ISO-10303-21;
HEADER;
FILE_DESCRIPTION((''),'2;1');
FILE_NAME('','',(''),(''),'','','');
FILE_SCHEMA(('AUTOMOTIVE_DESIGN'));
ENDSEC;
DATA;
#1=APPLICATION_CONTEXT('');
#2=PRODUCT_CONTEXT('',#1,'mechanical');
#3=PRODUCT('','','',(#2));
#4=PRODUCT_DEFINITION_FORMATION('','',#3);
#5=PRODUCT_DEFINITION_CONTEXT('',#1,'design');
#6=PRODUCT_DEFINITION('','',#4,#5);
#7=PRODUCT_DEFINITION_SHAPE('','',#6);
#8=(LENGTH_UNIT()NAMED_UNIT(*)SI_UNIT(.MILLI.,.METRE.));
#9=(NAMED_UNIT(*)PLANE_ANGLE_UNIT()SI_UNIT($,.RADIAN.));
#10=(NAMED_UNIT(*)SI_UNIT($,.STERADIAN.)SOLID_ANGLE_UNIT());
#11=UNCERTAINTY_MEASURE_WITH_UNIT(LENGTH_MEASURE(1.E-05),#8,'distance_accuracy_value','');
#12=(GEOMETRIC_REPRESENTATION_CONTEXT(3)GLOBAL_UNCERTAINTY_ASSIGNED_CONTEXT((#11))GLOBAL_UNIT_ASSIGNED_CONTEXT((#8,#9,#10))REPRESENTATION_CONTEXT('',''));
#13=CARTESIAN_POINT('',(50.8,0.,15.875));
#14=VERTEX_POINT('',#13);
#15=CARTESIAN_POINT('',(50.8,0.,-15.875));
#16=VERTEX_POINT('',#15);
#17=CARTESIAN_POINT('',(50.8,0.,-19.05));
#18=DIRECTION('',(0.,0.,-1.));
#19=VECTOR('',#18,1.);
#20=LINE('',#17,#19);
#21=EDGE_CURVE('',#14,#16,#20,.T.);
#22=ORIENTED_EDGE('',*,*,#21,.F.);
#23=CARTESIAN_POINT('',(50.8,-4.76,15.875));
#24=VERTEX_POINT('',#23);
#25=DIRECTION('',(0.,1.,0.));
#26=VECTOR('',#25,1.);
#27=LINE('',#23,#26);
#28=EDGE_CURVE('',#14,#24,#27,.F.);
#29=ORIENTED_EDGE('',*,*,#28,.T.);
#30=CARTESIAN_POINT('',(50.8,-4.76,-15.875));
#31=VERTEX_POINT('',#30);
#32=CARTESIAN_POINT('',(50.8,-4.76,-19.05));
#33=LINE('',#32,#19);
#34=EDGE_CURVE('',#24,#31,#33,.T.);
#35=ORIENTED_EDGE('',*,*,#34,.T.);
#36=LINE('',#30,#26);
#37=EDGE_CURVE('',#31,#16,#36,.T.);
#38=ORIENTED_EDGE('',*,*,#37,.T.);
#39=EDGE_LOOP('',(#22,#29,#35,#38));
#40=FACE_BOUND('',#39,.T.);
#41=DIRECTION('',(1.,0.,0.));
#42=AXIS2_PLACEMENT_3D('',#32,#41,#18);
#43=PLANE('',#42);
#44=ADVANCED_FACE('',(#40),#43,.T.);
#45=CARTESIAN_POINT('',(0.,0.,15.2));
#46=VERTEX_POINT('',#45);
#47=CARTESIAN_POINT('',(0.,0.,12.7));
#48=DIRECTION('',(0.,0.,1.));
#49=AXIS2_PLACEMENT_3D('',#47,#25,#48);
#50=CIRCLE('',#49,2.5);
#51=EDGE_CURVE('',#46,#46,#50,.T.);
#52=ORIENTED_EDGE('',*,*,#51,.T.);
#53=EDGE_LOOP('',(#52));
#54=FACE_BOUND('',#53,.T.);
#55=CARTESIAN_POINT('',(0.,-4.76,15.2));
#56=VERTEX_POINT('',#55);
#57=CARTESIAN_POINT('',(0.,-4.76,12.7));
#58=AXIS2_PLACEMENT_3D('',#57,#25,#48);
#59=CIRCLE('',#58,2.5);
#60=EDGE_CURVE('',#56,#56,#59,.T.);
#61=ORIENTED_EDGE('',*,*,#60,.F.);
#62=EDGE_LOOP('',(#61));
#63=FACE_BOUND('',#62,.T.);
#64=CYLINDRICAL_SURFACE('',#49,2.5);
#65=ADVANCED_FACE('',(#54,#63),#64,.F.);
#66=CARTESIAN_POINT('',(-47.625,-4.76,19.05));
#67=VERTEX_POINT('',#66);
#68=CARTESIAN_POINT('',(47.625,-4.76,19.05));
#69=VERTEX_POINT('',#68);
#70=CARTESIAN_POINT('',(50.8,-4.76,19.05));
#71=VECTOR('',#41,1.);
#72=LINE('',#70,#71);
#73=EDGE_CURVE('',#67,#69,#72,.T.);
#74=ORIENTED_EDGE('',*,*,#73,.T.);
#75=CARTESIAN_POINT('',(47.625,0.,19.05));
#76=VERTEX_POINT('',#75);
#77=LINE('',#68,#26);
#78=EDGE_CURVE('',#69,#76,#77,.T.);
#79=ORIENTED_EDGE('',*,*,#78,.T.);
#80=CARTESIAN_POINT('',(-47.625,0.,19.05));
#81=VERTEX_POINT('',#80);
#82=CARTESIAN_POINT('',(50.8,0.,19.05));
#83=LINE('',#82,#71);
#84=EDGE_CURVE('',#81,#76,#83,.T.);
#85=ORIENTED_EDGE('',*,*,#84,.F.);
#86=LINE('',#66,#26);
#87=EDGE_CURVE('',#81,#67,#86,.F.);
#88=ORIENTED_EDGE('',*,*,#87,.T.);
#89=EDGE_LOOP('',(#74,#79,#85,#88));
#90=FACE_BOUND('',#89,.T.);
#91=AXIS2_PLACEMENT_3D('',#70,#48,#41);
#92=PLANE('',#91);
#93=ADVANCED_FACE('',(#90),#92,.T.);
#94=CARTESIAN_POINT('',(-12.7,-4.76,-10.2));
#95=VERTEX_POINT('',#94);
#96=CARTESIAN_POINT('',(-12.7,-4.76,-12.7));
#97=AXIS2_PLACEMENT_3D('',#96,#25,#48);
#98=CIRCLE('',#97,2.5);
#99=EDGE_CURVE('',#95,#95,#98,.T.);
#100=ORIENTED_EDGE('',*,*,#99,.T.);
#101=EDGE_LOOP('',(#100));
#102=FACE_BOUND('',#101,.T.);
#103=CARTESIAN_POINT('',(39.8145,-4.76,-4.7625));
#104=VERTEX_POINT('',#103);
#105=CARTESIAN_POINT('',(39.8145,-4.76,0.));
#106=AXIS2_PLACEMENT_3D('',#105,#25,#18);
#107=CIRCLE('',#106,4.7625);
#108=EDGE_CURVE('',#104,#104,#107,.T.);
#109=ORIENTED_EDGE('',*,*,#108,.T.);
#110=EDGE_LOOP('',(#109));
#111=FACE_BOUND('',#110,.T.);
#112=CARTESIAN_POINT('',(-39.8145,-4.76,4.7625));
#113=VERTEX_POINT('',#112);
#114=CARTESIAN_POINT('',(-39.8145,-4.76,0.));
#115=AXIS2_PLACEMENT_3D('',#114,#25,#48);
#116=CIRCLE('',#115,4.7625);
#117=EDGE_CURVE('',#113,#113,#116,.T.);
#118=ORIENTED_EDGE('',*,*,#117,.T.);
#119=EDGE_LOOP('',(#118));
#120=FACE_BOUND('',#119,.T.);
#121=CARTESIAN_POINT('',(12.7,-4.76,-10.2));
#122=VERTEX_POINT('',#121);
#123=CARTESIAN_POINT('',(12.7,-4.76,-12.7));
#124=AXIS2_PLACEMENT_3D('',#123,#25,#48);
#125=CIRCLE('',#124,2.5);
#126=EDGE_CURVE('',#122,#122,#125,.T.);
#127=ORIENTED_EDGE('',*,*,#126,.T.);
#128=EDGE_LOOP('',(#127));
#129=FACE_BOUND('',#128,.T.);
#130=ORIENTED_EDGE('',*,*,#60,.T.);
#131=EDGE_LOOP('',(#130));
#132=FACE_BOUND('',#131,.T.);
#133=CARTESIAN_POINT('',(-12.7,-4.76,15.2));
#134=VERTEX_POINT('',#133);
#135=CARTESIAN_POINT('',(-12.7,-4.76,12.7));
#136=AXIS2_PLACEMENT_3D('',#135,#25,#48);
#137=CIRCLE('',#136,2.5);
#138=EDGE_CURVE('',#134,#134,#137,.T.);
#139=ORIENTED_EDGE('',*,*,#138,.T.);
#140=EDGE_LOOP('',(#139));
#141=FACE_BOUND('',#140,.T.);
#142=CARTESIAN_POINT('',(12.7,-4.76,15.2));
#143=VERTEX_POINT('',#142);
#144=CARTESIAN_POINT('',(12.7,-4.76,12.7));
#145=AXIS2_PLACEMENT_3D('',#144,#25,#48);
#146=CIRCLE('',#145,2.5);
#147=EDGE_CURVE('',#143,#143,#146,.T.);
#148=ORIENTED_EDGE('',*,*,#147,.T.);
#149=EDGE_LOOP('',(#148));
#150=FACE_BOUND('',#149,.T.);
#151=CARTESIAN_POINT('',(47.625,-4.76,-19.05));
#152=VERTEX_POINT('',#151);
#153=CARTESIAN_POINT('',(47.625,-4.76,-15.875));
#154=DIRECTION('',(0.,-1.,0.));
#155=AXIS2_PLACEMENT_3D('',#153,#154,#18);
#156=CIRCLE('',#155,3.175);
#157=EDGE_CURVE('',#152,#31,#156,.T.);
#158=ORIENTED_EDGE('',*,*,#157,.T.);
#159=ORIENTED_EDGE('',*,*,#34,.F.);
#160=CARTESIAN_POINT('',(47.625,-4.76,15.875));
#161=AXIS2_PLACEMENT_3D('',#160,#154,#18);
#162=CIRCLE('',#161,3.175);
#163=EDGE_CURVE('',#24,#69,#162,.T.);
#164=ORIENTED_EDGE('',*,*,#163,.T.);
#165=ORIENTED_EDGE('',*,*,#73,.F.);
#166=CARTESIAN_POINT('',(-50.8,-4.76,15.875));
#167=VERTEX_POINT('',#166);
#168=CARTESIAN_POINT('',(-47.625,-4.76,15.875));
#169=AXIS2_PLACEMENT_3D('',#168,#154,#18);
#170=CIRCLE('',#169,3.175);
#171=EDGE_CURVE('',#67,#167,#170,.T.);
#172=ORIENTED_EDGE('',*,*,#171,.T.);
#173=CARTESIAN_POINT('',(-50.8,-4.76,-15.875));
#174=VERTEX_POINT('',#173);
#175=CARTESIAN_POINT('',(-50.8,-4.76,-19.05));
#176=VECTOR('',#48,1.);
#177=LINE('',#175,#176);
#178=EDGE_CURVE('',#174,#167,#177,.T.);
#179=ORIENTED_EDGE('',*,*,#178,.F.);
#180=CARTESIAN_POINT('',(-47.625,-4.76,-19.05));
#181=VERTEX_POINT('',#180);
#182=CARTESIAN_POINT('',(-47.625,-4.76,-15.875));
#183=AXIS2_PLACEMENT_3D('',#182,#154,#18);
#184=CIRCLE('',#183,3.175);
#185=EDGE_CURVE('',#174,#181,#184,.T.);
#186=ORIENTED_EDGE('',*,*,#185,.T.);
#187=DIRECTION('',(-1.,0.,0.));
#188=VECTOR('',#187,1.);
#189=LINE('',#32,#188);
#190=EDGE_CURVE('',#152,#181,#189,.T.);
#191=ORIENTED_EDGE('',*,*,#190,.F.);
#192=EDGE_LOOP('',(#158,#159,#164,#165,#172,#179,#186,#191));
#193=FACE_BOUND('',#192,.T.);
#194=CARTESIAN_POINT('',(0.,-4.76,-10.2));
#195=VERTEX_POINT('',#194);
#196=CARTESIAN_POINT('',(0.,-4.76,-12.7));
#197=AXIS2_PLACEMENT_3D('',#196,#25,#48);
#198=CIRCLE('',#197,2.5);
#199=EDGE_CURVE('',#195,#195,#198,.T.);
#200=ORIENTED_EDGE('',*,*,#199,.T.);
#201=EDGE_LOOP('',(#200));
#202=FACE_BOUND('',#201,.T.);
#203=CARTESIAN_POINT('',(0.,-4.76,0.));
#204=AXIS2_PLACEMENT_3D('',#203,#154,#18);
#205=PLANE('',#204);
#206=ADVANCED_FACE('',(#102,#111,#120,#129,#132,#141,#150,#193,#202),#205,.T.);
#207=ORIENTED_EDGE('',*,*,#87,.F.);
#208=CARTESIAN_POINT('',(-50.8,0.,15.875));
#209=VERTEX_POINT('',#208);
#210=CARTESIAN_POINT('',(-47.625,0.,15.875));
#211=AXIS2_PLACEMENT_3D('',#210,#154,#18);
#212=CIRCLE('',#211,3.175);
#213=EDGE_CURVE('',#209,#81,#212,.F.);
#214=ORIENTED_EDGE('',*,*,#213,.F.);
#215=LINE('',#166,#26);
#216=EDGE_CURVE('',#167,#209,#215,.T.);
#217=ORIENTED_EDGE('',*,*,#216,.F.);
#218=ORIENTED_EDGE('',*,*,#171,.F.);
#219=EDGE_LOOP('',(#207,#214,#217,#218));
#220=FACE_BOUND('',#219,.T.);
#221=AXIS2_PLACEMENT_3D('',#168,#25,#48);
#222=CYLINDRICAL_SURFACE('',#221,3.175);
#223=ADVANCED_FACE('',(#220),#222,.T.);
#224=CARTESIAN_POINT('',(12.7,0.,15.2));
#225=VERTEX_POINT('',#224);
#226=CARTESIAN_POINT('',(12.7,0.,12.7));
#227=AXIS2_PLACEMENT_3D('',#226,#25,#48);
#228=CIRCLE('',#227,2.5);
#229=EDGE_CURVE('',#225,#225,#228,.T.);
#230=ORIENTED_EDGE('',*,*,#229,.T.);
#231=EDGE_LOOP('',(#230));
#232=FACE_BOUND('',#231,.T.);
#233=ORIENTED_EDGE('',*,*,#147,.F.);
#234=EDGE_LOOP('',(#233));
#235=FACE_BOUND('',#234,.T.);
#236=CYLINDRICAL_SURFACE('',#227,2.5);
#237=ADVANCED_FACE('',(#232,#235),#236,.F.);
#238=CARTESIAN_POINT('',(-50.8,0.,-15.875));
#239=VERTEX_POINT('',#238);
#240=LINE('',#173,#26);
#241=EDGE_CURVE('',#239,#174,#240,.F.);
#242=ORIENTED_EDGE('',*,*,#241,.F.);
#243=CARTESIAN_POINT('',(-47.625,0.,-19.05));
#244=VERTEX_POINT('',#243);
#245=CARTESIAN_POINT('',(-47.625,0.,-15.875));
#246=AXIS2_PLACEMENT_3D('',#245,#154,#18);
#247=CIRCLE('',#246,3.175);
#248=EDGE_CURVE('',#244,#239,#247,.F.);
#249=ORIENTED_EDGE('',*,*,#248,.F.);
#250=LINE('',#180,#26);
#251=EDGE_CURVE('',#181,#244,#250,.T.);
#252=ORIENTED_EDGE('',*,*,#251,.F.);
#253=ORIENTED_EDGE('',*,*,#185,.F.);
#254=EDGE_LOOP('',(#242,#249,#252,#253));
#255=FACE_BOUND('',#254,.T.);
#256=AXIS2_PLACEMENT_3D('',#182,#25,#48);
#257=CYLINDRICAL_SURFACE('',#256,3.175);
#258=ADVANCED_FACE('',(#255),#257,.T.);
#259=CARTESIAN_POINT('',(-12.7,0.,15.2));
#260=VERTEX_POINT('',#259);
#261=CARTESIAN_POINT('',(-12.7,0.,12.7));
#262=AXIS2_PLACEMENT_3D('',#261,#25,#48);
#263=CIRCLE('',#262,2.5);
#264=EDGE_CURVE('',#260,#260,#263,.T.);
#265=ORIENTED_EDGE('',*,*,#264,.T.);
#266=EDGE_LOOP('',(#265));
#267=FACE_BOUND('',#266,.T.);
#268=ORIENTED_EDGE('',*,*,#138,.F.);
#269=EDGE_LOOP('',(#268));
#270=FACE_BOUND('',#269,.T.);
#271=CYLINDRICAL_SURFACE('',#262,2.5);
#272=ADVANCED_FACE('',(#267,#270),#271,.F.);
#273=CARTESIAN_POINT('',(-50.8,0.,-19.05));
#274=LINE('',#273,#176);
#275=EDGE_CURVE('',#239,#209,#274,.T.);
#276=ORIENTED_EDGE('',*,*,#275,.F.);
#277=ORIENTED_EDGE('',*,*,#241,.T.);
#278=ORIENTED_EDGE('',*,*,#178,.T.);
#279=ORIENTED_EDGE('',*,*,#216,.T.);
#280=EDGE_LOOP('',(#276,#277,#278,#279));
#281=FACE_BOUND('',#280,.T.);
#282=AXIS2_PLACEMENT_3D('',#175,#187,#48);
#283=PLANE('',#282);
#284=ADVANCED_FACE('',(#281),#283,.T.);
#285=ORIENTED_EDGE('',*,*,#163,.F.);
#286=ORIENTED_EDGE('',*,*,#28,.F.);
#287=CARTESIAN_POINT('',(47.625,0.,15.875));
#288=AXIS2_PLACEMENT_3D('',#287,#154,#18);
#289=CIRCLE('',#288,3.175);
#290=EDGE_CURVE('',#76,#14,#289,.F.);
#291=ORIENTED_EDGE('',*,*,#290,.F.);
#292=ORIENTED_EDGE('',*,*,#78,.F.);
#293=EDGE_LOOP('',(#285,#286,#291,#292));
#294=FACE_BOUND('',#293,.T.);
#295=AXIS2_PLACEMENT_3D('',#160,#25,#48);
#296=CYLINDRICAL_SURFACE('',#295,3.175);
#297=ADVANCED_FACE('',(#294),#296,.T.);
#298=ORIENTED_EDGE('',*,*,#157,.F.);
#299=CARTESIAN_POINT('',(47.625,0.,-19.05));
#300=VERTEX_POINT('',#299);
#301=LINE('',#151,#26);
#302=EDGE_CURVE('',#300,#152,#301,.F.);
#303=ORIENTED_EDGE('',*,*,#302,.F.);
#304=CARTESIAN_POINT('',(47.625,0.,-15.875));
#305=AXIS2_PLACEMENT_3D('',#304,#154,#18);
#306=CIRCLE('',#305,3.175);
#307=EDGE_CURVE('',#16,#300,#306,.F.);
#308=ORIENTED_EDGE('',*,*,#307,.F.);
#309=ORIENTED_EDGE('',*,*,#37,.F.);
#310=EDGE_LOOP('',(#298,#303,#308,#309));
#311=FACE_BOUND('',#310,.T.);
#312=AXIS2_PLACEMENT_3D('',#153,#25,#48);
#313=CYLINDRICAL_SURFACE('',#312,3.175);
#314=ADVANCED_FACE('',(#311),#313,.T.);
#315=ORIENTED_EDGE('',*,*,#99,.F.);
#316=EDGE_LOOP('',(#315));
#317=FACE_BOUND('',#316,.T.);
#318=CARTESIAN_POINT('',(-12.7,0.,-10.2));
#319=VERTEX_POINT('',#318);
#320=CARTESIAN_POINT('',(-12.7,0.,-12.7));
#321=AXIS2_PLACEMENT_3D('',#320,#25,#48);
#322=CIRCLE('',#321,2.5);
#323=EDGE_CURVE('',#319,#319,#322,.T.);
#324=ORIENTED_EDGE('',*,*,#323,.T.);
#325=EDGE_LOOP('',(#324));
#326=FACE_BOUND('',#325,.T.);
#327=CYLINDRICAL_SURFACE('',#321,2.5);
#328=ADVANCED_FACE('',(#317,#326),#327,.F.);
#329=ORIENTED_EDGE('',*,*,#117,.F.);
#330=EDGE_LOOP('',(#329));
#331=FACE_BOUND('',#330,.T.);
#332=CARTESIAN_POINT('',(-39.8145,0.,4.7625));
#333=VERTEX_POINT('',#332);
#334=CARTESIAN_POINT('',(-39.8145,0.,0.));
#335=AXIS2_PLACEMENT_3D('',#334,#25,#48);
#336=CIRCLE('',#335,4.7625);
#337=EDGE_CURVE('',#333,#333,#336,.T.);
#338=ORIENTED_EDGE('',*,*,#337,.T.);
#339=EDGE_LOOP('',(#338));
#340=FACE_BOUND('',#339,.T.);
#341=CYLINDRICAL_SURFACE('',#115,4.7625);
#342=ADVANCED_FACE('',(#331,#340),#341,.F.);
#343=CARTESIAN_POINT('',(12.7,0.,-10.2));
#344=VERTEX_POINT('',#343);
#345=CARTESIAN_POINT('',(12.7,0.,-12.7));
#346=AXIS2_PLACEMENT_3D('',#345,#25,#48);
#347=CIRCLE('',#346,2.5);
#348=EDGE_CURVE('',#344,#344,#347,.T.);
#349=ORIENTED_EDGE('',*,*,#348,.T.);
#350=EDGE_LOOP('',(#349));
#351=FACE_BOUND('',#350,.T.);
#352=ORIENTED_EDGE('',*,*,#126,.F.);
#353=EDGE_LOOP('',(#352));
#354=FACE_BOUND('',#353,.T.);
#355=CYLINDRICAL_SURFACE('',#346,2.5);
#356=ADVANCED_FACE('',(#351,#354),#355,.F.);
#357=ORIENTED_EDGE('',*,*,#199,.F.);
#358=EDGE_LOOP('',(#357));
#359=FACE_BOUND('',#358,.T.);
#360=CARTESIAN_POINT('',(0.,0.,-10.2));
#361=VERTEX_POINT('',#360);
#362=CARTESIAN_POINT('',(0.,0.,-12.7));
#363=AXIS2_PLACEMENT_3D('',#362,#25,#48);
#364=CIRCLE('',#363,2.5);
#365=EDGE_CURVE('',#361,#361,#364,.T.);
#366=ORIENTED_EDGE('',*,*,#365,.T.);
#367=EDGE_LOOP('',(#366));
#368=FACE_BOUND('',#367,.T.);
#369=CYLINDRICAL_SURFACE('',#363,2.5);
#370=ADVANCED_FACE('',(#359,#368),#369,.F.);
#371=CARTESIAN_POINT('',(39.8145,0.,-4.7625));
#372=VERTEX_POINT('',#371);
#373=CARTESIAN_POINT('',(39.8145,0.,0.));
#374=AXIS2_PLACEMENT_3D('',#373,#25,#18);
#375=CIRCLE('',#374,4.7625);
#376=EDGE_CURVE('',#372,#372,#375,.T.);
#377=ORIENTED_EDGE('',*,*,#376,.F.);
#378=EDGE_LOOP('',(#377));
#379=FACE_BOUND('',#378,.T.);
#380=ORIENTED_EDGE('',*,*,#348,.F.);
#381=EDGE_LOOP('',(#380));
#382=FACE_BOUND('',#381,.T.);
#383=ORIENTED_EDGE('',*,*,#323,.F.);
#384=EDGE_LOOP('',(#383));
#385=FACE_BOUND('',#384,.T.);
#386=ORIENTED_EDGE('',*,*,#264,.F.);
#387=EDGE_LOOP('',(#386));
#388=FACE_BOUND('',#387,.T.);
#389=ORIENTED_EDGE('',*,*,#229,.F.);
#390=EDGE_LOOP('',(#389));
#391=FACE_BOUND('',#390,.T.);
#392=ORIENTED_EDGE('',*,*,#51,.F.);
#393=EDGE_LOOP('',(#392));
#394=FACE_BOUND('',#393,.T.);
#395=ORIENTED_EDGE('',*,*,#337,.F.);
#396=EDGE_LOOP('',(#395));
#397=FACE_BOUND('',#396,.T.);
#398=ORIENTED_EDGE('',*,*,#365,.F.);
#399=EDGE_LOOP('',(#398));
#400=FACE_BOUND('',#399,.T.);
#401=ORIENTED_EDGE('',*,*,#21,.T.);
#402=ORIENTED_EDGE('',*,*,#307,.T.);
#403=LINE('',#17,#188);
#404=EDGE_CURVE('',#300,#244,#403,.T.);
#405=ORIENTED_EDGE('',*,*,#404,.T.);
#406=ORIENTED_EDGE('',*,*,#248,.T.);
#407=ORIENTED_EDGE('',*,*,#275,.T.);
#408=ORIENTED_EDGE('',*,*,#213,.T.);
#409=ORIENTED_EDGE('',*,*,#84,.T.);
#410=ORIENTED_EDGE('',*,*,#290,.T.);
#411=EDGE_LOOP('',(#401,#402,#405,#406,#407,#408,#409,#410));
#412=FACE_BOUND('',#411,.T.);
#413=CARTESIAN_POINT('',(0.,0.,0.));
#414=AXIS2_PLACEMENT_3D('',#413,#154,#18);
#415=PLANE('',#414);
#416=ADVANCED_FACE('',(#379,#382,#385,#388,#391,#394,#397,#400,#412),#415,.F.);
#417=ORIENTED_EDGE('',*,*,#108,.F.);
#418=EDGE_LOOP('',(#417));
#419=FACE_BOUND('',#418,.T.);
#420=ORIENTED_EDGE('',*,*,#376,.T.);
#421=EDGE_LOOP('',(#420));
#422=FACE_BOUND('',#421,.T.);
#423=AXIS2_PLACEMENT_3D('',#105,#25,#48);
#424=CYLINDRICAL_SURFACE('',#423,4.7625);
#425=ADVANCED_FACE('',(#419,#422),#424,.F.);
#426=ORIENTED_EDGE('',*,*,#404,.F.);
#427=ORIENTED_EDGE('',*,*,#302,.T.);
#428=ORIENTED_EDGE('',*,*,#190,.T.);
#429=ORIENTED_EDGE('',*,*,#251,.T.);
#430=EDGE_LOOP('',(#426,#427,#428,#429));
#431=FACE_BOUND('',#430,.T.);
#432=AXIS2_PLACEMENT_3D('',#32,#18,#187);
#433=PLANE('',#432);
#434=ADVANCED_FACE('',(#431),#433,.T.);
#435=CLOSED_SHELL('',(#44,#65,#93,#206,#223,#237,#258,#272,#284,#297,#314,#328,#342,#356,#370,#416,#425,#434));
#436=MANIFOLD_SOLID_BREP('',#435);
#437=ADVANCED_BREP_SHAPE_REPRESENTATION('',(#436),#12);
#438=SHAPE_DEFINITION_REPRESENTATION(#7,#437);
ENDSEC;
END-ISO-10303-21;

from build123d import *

# Parameters (mm, degrees)
ESQUISSE1_W                   = 101.6
ESQUISSE1_H                   = 38.1
T_LE_DE_BASE_PLI_E1_DEPTH     = 4.76
ESQUISSE13_R                  = 4.7625
ENL_V_MAT_EXTRU_3_DEPTH       = 55.46283228
DIAM_TRE_DU_PER_AGE_5_0_5_1_D = 5
R_P_TITION_LIN_AIRE1_COUNT    = 2
R_P_TITION_LIN_AIRE1_PITCH    = 25.4
CONG_2_R                      = 3.175


# Sheet-metal steps are written as plain solids
with BuildPart() as part:
    # Esquisse1 → Tôle de base pliée1 (new body)
    with BuildSketch(Plane(origin=(0, 0, 0), x_dir=(1, 0, 0), z_dir=(0, 1, 0))):
        Rectangle(ESQUISSE1_W, ESQUISSE1_H)
    extrude(amount=-T_LE_DE_BASE_PLI_E1_DEPTH)

    # Esquisse13 → Enlèv. mat.-Extru.3 (cut, through all)
    with BuildSketch(Plane(origin=(0, 0, 0), x_dir=(1, 0, 0), z_dir=(0, 1, 0))):
        with Locations(Location((-39.8145, 0, 0), (0, 0, 270))):
            Circle(ESQUISSE13_R)
        with Locations(Location((39.8145, 0, 0), (0, 0, 90))):
            Circle(ESQUISSE13_R)
    extrude(amount=-ENL_V_MAT_EXTRU_3_DEPTH, mode=Mode.SUBTRACT)

    # Diamètre du perçage Ø5.0 (5)1 (through all)
    with Locations(Plane(origin=(0, 0, 0), x_dir=(1, 0, 0), z_dir=(0, 1, 0))):
        with Locations((-12.7, 12.7), (0, 12.7), (12.7, 12.7)):
            diam_tre_du_per_age_5_0_5_1 = Hole(DIAM_TRE_DU_PER_AGE_5_0_5_1_D / 2)

    # Répétition linéaire1: Diamètre du perçage Ø5.0 (5)1 ×2
    with Locations(*[(0, 0, i * R_P_TITION_LIN_AIRE1_PITCH) for i in range(1, R_P_TITION_LIN_AIRE1_COUNT)]):
        add(diam_tre_du_per_age_5_0_5_1, mode=Mode.SUBTRACT)

    # Congé2
    cong_2_edges = [part.edges().sort_by_distance(p)[0] for p in [
        (-50.8, -2.38, -19.05),
        (50.8, -2.38, -19.05),
        (50.8, -2.38, 19.05),
        (-50.8, -2.38, 19.05),
    ]]
    fillet(cong_2_edges, radius=CONG_2_R)


solid = part.part
